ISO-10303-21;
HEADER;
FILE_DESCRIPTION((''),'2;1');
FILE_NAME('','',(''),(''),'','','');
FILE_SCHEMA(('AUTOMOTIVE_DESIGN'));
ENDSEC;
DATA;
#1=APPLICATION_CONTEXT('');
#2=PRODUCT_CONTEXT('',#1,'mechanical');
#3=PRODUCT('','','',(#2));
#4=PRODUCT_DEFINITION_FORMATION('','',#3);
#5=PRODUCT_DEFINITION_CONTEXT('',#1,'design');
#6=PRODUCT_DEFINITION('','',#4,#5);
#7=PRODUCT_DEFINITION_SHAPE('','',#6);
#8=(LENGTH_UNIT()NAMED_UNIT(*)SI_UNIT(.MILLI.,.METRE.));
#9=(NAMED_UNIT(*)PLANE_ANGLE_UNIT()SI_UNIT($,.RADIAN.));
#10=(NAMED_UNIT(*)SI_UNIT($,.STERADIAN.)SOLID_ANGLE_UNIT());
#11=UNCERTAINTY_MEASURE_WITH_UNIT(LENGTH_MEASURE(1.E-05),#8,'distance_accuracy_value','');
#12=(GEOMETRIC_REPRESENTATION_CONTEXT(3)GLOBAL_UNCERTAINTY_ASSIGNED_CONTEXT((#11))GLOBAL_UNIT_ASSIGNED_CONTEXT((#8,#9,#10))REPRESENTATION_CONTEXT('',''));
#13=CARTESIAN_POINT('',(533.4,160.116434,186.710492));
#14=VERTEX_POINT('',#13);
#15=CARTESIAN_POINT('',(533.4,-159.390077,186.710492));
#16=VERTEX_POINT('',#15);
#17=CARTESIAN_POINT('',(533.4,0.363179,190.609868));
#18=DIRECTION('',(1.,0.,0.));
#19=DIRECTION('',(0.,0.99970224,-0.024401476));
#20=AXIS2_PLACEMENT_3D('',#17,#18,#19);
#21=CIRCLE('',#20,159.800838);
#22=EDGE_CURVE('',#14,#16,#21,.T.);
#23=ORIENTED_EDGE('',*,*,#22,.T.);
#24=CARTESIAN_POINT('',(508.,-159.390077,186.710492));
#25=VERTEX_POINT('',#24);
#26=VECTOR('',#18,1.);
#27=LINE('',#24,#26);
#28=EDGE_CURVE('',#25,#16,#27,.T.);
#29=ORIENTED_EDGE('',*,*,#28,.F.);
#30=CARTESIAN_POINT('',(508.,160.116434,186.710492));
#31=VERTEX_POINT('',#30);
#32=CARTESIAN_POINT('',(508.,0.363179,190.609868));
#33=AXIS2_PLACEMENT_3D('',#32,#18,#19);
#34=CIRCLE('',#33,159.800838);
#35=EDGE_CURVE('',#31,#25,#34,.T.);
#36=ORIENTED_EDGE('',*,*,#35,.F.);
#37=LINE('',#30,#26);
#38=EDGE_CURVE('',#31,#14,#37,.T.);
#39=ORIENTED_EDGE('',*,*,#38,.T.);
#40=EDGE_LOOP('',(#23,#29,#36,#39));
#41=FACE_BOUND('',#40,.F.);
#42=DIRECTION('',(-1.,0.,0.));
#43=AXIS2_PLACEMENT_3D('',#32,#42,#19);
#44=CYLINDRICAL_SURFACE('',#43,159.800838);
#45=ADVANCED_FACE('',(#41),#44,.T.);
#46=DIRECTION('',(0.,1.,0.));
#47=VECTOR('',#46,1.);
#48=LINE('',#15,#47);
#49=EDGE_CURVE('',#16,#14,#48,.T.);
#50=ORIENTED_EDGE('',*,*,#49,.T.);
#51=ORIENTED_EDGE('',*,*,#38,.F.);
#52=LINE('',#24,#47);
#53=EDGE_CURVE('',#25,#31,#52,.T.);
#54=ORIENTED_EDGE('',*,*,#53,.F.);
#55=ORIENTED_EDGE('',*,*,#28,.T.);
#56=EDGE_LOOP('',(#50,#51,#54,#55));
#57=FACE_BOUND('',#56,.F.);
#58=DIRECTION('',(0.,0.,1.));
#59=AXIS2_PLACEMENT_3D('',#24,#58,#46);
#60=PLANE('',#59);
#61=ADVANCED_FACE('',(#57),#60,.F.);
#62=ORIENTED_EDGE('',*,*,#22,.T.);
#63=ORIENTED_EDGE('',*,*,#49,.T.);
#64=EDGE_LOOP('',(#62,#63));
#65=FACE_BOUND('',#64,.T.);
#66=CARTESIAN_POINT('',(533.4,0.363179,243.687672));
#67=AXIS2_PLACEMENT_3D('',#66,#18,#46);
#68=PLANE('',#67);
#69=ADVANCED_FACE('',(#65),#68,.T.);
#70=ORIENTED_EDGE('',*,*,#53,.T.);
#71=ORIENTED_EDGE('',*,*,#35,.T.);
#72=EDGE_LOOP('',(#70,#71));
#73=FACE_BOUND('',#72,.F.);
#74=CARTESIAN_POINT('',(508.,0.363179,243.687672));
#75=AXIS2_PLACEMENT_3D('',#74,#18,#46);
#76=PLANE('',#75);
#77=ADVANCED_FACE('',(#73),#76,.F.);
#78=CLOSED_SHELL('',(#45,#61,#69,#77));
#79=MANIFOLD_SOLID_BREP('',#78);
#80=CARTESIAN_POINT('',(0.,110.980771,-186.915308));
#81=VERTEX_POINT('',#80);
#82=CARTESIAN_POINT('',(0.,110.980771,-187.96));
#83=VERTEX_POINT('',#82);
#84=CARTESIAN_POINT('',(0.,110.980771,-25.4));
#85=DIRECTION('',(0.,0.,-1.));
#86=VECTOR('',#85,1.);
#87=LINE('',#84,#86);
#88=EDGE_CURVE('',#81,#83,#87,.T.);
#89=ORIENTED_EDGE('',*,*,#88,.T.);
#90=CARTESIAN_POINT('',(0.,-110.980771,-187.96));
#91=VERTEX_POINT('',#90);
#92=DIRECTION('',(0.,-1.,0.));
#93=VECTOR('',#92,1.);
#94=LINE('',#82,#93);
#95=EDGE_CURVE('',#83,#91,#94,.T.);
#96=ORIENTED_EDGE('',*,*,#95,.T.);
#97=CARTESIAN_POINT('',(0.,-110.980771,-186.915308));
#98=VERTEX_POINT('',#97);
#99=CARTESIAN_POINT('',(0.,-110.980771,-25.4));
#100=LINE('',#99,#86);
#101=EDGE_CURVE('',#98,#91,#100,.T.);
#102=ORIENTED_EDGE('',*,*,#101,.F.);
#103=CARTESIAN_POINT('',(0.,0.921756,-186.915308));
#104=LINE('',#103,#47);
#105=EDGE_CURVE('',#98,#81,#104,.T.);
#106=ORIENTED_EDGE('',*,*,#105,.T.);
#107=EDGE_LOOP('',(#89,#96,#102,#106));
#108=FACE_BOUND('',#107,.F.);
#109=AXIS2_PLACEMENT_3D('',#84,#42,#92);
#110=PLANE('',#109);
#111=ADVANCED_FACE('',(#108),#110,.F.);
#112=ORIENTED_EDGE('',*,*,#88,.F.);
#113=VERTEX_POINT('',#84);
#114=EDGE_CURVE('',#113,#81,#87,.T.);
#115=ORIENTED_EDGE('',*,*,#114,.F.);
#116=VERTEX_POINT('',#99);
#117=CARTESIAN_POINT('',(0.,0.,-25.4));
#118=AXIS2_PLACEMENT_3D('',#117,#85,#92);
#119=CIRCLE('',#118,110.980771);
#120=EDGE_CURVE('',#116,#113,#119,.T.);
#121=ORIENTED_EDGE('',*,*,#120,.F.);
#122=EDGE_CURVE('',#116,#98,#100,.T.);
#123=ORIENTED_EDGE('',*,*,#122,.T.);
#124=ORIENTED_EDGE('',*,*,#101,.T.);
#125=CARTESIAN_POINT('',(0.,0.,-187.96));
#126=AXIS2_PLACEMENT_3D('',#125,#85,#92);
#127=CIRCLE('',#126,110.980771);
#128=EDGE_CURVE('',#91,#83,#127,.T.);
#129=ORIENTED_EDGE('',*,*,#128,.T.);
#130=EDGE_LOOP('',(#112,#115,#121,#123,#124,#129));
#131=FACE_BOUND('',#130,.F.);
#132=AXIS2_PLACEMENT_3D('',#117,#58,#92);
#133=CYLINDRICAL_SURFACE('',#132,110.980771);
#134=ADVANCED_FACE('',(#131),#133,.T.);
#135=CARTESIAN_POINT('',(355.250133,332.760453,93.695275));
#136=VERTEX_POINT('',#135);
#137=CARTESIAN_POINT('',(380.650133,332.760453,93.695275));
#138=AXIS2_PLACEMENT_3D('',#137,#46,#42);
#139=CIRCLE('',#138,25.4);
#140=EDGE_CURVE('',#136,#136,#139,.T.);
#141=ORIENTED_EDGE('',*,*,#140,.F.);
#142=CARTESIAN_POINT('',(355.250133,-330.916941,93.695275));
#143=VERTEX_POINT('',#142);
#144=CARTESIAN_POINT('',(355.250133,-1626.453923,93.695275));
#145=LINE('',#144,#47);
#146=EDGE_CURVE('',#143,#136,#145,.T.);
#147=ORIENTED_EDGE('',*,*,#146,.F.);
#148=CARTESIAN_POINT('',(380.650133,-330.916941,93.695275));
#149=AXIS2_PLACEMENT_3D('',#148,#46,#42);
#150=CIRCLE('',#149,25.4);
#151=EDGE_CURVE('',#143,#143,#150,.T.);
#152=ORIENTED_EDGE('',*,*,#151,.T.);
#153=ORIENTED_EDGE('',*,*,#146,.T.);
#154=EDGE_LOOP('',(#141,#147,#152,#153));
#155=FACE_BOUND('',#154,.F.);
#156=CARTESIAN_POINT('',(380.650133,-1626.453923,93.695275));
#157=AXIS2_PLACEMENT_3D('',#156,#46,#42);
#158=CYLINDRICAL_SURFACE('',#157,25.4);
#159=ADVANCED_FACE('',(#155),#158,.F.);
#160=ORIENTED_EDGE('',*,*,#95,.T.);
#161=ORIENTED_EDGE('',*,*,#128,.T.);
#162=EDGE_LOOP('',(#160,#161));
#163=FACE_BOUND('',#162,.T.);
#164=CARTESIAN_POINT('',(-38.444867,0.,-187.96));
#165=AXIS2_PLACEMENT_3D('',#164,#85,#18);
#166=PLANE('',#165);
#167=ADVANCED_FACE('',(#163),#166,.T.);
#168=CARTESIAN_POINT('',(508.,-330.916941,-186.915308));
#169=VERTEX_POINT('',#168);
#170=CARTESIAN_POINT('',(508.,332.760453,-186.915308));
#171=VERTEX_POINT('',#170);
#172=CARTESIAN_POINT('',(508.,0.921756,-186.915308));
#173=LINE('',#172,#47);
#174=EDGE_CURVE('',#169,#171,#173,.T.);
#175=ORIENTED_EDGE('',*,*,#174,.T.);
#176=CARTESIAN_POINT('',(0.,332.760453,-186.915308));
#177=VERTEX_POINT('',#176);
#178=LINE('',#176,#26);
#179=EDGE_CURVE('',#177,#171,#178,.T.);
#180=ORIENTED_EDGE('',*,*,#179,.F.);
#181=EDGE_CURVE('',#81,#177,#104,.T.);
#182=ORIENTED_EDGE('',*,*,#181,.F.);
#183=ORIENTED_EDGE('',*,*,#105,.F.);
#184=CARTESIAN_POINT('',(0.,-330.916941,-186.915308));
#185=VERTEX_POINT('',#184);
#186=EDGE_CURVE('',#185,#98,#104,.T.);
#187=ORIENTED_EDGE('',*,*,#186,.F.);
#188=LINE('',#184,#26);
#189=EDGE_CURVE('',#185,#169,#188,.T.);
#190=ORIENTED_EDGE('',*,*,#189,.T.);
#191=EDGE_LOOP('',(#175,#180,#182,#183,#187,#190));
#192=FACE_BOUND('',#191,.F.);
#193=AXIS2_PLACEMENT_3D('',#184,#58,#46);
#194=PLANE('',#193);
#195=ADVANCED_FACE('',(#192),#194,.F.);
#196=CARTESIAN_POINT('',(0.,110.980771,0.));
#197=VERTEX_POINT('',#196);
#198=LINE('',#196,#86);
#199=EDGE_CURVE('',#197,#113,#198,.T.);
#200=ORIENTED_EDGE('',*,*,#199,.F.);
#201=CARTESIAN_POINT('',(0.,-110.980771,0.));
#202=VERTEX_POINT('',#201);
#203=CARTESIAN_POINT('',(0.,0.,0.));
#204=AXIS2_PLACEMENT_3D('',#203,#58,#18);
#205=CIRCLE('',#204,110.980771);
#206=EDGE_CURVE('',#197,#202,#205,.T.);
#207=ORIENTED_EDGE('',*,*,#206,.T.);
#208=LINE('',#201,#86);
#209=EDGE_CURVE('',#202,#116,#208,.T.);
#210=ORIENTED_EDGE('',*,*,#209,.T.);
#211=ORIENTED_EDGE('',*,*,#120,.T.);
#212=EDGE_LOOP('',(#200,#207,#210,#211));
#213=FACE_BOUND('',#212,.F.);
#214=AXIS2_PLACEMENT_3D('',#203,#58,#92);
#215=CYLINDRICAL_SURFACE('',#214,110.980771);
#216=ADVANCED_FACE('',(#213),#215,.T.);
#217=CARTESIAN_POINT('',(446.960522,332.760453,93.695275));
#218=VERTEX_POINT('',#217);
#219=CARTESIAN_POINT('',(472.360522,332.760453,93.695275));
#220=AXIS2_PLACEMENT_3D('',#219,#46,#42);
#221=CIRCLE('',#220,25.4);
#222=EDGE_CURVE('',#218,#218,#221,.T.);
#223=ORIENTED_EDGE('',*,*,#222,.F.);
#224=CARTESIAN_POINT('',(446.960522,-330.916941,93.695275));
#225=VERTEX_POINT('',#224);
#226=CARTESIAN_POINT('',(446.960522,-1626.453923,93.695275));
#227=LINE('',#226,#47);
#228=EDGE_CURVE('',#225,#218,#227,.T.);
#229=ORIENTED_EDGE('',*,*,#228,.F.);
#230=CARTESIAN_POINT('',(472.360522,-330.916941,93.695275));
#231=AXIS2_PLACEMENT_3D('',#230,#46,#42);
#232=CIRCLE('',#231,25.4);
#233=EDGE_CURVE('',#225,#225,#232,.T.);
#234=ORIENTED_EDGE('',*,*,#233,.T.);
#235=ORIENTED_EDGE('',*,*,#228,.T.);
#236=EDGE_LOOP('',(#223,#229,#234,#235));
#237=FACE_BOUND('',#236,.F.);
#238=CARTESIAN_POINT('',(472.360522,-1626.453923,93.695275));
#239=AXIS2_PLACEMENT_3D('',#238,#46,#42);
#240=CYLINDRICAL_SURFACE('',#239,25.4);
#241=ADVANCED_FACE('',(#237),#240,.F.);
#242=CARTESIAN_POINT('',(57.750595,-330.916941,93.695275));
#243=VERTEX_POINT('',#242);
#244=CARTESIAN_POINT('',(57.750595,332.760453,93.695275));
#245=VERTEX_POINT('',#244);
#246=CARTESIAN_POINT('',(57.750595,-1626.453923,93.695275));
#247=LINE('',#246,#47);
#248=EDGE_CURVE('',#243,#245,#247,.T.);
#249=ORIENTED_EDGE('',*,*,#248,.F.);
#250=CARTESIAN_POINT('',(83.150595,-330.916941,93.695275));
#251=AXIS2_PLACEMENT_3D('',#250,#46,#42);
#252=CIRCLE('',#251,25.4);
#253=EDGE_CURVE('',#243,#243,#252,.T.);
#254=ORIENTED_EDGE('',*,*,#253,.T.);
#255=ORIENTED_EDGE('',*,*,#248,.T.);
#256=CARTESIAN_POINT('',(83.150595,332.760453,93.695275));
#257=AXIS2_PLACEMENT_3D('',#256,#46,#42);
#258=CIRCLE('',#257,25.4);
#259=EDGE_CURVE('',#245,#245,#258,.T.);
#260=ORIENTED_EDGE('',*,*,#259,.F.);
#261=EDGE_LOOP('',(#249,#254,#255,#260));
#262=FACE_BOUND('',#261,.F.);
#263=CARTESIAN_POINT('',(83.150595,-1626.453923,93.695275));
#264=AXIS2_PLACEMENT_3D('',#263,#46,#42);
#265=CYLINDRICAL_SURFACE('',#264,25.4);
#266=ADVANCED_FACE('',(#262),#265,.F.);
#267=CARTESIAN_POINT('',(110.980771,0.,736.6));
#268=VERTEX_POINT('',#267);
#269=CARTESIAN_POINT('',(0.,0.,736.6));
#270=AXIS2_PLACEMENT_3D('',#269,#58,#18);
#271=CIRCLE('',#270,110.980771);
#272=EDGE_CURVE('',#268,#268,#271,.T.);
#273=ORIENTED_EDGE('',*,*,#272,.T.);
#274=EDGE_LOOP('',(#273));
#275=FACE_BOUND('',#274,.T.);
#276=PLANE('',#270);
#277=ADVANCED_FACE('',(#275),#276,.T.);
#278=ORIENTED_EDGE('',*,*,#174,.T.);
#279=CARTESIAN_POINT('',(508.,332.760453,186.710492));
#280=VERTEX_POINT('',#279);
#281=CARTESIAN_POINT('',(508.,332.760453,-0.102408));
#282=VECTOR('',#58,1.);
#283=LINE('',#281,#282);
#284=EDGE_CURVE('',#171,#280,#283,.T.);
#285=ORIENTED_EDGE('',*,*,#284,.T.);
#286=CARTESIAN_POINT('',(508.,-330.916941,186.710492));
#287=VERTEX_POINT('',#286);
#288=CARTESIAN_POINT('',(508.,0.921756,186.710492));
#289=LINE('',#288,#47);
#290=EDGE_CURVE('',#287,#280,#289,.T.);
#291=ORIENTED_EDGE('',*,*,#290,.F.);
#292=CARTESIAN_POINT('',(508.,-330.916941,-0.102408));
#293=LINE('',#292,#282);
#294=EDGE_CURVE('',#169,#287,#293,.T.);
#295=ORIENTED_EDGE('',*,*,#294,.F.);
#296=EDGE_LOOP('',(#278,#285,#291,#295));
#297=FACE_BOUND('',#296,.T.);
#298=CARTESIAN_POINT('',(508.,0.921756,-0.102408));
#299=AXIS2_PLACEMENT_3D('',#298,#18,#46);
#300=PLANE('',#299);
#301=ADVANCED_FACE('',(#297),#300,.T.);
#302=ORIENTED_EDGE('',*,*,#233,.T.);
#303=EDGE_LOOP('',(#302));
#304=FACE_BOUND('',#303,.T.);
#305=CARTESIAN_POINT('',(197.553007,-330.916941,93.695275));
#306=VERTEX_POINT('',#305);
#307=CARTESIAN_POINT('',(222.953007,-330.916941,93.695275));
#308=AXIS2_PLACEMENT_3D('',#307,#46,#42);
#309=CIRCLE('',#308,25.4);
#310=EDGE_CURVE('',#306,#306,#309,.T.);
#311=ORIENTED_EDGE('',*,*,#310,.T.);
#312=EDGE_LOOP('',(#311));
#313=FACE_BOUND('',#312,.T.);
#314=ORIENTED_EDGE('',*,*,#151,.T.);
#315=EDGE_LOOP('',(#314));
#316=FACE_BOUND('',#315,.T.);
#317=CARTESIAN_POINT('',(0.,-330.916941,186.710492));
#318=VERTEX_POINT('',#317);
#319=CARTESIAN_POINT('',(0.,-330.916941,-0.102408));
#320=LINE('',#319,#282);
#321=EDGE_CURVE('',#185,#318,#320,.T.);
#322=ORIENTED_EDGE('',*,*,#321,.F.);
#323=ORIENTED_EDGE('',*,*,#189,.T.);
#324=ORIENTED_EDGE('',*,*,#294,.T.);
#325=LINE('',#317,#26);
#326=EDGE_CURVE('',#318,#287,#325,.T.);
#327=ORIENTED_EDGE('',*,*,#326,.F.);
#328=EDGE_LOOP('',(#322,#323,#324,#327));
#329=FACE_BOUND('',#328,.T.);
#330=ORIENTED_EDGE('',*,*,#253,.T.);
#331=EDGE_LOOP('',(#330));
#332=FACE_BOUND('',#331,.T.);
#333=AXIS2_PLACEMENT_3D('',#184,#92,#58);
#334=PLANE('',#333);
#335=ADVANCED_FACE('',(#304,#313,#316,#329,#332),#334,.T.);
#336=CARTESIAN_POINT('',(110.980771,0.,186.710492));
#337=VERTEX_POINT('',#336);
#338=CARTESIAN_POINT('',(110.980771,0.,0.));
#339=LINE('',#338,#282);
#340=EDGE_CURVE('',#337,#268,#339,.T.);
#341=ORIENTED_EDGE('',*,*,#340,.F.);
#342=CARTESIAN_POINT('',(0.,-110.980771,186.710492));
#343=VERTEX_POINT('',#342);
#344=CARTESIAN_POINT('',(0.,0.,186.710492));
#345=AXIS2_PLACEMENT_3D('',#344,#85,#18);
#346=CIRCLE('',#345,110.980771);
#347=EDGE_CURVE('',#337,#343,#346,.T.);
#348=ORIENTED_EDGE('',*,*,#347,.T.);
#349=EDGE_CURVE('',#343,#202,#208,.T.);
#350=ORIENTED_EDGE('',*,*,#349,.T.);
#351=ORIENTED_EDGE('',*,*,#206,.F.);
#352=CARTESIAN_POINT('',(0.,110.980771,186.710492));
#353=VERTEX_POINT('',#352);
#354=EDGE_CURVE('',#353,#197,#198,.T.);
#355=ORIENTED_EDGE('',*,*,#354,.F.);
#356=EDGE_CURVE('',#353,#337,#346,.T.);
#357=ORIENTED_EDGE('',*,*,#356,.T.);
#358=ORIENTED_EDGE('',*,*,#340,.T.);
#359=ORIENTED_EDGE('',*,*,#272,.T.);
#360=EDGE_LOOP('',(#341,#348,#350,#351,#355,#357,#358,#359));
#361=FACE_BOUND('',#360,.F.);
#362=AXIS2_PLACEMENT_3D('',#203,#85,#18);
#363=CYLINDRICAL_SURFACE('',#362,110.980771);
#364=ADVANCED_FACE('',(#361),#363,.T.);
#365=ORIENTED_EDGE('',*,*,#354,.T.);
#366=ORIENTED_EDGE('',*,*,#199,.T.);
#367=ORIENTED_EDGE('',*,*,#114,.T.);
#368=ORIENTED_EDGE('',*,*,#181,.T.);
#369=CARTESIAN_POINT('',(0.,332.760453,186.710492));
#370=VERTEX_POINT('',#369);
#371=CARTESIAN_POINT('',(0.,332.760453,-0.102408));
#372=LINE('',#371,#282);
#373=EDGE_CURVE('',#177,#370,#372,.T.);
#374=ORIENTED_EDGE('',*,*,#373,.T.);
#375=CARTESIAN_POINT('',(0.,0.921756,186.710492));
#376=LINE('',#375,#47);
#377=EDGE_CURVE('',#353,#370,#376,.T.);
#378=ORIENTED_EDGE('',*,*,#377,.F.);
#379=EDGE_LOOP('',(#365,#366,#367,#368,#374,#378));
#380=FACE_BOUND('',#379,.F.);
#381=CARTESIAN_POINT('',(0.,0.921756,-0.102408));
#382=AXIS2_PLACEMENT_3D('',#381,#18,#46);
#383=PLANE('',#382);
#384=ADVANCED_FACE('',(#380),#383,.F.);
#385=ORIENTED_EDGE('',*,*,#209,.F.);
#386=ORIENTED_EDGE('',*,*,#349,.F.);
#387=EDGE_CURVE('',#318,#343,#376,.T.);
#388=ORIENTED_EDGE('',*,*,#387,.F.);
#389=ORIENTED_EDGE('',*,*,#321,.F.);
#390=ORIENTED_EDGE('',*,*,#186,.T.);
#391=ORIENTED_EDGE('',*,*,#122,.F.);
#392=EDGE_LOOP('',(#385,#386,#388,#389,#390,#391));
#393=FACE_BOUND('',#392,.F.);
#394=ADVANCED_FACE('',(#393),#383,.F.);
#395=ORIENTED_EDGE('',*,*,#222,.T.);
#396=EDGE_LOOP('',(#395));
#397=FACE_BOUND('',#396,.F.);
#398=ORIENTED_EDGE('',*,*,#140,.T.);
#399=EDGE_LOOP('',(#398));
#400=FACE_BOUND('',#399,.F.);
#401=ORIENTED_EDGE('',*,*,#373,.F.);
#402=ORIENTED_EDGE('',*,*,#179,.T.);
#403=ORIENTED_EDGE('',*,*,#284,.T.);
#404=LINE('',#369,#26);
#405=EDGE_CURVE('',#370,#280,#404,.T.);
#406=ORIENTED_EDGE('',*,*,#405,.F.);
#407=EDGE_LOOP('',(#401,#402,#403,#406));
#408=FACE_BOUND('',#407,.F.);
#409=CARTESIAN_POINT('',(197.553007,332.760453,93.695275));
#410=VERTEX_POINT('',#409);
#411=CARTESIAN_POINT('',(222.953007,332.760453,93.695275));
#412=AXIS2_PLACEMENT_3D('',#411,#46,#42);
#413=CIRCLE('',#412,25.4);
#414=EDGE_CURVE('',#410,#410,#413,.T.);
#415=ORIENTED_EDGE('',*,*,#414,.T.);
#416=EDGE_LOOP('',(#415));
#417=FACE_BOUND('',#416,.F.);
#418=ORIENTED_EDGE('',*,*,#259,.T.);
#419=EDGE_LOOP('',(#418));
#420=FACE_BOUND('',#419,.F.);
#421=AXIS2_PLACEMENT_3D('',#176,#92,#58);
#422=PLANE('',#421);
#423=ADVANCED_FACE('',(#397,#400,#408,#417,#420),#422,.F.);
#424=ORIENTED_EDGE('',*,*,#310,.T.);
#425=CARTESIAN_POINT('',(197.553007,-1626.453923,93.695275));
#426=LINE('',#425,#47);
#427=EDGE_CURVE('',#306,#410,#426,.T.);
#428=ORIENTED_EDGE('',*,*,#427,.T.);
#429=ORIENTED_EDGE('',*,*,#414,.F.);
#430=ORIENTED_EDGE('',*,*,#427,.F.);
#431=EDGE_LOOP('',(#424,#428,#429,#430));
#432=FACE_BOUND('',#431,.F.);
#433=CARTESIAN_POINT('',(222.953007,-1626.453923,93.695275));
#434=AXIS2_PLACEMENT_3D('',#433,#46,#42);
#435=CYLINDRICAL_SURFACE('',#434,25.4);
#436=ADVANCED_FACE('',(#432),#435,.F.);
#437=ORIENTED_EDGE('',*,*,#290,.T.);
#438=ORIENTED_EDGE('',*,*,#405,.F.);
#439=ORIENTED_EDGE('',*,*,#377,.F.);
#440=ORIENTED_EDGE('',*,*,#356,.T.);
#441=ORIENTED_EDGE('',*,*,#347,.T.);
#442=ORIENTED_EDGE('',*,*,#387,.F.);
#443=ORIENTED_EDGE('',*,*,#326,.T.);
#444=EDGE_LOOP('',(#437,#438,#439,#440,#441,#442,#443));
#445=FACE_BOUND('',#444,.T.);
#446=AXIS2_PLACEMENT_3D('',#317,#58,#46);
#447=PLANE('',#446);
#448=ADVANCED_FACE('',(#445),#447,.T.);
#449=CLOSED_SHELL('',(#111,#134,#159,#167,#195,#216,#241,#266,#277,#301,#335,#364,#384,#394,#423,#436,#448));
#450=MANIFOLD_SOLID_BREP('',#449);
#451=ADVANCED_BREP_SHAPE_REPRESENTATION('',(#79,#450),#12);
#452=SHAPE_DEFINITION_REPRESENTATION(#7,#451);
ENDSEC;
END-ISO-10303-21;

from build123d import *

# Parameters (mm, degrees)
F0_R     = 110.9807708896
F1_DEPTH = 736.6
F2_W     = 663.6773943901
F2_H     = 373.6258000135
F3_DEPTH = 508
F5_DEPTH = 25.4
F7_DEPTH = 25.4
F9_DEPTH = 162.56
F11_D    = 50.8


with BuildPart() as f1:
    # F0 (on Top) → F1 (new body)
    with BuildSketch(Plane.XY):
        Circle(F0_R)
    extrude(amount=F1_DEPTH)

    # F2 (on Right) → F3 (join)
    with BuildSketch(Plane.YZ):
        with Locations((0.9217560291, -0.1024082303)):
            Rectangle(F2_W, F2_H)
    extrude(amount=F3_DEPTH)

    # F6 (on face) → F7 (join)
    with BuildSketch(Plane(origin=(0, 0, 0), x_dir=(1, 0, 0), z_dir=(0, 0, -1))):
        with BuildLine():
            Line((0, -110.9807708896), (0, 110.9807708896))
            ThreePointArc((0, 110.9807708896), (-110.9807708896, 0), (0, -110.9807708896))
        make_face()
    extrude(amount=F7_DEPTH)

    # F8 (on face) → F9 (join)
    with BuildSketch(Plane(origin=(0, 0, -25.4), x_dir=(1, 0, 0), z_dir=(0, 0, -1))):
        with BuildLine():
            Line((0, -110.9807708896), (0, 110.9807708896))
            ThreePointArc((0, 110.9807708896), (-110.9807708896, 0), (0, -110.9807708896))
        make_face()
    extrude(amount=F9_DEPTH)

    # F11 (through all)
    with Locations(Plane.XZ.offset(330.9169411659)):
        with Locations((83.1505954266, 93.6952754855), (222.9530066252, 93.6952754855), (380.6501328945, 93.6952754855), (472.3605215549, 93.6952754855)):
            Hole(F11_D / 2)


with BuildPart() as f5:
    # F4 (on face) → F5 (new body)
    with BuildSketch(Plane.YZ.offset(508)):
        with BuildLine():
            Line((-159.3900769949, 186.7104917765), (160.1164340973, 186.7104917765))
            ThreePointArc((160.1164340973, 186.7104917765), (0.3631785512, 350.410705947), (-159.3900769949, 186.7104917765))
        make_face()
    extrude(amount=F5_DEPTH)


solid = Compound([f1.part, f5.part])
